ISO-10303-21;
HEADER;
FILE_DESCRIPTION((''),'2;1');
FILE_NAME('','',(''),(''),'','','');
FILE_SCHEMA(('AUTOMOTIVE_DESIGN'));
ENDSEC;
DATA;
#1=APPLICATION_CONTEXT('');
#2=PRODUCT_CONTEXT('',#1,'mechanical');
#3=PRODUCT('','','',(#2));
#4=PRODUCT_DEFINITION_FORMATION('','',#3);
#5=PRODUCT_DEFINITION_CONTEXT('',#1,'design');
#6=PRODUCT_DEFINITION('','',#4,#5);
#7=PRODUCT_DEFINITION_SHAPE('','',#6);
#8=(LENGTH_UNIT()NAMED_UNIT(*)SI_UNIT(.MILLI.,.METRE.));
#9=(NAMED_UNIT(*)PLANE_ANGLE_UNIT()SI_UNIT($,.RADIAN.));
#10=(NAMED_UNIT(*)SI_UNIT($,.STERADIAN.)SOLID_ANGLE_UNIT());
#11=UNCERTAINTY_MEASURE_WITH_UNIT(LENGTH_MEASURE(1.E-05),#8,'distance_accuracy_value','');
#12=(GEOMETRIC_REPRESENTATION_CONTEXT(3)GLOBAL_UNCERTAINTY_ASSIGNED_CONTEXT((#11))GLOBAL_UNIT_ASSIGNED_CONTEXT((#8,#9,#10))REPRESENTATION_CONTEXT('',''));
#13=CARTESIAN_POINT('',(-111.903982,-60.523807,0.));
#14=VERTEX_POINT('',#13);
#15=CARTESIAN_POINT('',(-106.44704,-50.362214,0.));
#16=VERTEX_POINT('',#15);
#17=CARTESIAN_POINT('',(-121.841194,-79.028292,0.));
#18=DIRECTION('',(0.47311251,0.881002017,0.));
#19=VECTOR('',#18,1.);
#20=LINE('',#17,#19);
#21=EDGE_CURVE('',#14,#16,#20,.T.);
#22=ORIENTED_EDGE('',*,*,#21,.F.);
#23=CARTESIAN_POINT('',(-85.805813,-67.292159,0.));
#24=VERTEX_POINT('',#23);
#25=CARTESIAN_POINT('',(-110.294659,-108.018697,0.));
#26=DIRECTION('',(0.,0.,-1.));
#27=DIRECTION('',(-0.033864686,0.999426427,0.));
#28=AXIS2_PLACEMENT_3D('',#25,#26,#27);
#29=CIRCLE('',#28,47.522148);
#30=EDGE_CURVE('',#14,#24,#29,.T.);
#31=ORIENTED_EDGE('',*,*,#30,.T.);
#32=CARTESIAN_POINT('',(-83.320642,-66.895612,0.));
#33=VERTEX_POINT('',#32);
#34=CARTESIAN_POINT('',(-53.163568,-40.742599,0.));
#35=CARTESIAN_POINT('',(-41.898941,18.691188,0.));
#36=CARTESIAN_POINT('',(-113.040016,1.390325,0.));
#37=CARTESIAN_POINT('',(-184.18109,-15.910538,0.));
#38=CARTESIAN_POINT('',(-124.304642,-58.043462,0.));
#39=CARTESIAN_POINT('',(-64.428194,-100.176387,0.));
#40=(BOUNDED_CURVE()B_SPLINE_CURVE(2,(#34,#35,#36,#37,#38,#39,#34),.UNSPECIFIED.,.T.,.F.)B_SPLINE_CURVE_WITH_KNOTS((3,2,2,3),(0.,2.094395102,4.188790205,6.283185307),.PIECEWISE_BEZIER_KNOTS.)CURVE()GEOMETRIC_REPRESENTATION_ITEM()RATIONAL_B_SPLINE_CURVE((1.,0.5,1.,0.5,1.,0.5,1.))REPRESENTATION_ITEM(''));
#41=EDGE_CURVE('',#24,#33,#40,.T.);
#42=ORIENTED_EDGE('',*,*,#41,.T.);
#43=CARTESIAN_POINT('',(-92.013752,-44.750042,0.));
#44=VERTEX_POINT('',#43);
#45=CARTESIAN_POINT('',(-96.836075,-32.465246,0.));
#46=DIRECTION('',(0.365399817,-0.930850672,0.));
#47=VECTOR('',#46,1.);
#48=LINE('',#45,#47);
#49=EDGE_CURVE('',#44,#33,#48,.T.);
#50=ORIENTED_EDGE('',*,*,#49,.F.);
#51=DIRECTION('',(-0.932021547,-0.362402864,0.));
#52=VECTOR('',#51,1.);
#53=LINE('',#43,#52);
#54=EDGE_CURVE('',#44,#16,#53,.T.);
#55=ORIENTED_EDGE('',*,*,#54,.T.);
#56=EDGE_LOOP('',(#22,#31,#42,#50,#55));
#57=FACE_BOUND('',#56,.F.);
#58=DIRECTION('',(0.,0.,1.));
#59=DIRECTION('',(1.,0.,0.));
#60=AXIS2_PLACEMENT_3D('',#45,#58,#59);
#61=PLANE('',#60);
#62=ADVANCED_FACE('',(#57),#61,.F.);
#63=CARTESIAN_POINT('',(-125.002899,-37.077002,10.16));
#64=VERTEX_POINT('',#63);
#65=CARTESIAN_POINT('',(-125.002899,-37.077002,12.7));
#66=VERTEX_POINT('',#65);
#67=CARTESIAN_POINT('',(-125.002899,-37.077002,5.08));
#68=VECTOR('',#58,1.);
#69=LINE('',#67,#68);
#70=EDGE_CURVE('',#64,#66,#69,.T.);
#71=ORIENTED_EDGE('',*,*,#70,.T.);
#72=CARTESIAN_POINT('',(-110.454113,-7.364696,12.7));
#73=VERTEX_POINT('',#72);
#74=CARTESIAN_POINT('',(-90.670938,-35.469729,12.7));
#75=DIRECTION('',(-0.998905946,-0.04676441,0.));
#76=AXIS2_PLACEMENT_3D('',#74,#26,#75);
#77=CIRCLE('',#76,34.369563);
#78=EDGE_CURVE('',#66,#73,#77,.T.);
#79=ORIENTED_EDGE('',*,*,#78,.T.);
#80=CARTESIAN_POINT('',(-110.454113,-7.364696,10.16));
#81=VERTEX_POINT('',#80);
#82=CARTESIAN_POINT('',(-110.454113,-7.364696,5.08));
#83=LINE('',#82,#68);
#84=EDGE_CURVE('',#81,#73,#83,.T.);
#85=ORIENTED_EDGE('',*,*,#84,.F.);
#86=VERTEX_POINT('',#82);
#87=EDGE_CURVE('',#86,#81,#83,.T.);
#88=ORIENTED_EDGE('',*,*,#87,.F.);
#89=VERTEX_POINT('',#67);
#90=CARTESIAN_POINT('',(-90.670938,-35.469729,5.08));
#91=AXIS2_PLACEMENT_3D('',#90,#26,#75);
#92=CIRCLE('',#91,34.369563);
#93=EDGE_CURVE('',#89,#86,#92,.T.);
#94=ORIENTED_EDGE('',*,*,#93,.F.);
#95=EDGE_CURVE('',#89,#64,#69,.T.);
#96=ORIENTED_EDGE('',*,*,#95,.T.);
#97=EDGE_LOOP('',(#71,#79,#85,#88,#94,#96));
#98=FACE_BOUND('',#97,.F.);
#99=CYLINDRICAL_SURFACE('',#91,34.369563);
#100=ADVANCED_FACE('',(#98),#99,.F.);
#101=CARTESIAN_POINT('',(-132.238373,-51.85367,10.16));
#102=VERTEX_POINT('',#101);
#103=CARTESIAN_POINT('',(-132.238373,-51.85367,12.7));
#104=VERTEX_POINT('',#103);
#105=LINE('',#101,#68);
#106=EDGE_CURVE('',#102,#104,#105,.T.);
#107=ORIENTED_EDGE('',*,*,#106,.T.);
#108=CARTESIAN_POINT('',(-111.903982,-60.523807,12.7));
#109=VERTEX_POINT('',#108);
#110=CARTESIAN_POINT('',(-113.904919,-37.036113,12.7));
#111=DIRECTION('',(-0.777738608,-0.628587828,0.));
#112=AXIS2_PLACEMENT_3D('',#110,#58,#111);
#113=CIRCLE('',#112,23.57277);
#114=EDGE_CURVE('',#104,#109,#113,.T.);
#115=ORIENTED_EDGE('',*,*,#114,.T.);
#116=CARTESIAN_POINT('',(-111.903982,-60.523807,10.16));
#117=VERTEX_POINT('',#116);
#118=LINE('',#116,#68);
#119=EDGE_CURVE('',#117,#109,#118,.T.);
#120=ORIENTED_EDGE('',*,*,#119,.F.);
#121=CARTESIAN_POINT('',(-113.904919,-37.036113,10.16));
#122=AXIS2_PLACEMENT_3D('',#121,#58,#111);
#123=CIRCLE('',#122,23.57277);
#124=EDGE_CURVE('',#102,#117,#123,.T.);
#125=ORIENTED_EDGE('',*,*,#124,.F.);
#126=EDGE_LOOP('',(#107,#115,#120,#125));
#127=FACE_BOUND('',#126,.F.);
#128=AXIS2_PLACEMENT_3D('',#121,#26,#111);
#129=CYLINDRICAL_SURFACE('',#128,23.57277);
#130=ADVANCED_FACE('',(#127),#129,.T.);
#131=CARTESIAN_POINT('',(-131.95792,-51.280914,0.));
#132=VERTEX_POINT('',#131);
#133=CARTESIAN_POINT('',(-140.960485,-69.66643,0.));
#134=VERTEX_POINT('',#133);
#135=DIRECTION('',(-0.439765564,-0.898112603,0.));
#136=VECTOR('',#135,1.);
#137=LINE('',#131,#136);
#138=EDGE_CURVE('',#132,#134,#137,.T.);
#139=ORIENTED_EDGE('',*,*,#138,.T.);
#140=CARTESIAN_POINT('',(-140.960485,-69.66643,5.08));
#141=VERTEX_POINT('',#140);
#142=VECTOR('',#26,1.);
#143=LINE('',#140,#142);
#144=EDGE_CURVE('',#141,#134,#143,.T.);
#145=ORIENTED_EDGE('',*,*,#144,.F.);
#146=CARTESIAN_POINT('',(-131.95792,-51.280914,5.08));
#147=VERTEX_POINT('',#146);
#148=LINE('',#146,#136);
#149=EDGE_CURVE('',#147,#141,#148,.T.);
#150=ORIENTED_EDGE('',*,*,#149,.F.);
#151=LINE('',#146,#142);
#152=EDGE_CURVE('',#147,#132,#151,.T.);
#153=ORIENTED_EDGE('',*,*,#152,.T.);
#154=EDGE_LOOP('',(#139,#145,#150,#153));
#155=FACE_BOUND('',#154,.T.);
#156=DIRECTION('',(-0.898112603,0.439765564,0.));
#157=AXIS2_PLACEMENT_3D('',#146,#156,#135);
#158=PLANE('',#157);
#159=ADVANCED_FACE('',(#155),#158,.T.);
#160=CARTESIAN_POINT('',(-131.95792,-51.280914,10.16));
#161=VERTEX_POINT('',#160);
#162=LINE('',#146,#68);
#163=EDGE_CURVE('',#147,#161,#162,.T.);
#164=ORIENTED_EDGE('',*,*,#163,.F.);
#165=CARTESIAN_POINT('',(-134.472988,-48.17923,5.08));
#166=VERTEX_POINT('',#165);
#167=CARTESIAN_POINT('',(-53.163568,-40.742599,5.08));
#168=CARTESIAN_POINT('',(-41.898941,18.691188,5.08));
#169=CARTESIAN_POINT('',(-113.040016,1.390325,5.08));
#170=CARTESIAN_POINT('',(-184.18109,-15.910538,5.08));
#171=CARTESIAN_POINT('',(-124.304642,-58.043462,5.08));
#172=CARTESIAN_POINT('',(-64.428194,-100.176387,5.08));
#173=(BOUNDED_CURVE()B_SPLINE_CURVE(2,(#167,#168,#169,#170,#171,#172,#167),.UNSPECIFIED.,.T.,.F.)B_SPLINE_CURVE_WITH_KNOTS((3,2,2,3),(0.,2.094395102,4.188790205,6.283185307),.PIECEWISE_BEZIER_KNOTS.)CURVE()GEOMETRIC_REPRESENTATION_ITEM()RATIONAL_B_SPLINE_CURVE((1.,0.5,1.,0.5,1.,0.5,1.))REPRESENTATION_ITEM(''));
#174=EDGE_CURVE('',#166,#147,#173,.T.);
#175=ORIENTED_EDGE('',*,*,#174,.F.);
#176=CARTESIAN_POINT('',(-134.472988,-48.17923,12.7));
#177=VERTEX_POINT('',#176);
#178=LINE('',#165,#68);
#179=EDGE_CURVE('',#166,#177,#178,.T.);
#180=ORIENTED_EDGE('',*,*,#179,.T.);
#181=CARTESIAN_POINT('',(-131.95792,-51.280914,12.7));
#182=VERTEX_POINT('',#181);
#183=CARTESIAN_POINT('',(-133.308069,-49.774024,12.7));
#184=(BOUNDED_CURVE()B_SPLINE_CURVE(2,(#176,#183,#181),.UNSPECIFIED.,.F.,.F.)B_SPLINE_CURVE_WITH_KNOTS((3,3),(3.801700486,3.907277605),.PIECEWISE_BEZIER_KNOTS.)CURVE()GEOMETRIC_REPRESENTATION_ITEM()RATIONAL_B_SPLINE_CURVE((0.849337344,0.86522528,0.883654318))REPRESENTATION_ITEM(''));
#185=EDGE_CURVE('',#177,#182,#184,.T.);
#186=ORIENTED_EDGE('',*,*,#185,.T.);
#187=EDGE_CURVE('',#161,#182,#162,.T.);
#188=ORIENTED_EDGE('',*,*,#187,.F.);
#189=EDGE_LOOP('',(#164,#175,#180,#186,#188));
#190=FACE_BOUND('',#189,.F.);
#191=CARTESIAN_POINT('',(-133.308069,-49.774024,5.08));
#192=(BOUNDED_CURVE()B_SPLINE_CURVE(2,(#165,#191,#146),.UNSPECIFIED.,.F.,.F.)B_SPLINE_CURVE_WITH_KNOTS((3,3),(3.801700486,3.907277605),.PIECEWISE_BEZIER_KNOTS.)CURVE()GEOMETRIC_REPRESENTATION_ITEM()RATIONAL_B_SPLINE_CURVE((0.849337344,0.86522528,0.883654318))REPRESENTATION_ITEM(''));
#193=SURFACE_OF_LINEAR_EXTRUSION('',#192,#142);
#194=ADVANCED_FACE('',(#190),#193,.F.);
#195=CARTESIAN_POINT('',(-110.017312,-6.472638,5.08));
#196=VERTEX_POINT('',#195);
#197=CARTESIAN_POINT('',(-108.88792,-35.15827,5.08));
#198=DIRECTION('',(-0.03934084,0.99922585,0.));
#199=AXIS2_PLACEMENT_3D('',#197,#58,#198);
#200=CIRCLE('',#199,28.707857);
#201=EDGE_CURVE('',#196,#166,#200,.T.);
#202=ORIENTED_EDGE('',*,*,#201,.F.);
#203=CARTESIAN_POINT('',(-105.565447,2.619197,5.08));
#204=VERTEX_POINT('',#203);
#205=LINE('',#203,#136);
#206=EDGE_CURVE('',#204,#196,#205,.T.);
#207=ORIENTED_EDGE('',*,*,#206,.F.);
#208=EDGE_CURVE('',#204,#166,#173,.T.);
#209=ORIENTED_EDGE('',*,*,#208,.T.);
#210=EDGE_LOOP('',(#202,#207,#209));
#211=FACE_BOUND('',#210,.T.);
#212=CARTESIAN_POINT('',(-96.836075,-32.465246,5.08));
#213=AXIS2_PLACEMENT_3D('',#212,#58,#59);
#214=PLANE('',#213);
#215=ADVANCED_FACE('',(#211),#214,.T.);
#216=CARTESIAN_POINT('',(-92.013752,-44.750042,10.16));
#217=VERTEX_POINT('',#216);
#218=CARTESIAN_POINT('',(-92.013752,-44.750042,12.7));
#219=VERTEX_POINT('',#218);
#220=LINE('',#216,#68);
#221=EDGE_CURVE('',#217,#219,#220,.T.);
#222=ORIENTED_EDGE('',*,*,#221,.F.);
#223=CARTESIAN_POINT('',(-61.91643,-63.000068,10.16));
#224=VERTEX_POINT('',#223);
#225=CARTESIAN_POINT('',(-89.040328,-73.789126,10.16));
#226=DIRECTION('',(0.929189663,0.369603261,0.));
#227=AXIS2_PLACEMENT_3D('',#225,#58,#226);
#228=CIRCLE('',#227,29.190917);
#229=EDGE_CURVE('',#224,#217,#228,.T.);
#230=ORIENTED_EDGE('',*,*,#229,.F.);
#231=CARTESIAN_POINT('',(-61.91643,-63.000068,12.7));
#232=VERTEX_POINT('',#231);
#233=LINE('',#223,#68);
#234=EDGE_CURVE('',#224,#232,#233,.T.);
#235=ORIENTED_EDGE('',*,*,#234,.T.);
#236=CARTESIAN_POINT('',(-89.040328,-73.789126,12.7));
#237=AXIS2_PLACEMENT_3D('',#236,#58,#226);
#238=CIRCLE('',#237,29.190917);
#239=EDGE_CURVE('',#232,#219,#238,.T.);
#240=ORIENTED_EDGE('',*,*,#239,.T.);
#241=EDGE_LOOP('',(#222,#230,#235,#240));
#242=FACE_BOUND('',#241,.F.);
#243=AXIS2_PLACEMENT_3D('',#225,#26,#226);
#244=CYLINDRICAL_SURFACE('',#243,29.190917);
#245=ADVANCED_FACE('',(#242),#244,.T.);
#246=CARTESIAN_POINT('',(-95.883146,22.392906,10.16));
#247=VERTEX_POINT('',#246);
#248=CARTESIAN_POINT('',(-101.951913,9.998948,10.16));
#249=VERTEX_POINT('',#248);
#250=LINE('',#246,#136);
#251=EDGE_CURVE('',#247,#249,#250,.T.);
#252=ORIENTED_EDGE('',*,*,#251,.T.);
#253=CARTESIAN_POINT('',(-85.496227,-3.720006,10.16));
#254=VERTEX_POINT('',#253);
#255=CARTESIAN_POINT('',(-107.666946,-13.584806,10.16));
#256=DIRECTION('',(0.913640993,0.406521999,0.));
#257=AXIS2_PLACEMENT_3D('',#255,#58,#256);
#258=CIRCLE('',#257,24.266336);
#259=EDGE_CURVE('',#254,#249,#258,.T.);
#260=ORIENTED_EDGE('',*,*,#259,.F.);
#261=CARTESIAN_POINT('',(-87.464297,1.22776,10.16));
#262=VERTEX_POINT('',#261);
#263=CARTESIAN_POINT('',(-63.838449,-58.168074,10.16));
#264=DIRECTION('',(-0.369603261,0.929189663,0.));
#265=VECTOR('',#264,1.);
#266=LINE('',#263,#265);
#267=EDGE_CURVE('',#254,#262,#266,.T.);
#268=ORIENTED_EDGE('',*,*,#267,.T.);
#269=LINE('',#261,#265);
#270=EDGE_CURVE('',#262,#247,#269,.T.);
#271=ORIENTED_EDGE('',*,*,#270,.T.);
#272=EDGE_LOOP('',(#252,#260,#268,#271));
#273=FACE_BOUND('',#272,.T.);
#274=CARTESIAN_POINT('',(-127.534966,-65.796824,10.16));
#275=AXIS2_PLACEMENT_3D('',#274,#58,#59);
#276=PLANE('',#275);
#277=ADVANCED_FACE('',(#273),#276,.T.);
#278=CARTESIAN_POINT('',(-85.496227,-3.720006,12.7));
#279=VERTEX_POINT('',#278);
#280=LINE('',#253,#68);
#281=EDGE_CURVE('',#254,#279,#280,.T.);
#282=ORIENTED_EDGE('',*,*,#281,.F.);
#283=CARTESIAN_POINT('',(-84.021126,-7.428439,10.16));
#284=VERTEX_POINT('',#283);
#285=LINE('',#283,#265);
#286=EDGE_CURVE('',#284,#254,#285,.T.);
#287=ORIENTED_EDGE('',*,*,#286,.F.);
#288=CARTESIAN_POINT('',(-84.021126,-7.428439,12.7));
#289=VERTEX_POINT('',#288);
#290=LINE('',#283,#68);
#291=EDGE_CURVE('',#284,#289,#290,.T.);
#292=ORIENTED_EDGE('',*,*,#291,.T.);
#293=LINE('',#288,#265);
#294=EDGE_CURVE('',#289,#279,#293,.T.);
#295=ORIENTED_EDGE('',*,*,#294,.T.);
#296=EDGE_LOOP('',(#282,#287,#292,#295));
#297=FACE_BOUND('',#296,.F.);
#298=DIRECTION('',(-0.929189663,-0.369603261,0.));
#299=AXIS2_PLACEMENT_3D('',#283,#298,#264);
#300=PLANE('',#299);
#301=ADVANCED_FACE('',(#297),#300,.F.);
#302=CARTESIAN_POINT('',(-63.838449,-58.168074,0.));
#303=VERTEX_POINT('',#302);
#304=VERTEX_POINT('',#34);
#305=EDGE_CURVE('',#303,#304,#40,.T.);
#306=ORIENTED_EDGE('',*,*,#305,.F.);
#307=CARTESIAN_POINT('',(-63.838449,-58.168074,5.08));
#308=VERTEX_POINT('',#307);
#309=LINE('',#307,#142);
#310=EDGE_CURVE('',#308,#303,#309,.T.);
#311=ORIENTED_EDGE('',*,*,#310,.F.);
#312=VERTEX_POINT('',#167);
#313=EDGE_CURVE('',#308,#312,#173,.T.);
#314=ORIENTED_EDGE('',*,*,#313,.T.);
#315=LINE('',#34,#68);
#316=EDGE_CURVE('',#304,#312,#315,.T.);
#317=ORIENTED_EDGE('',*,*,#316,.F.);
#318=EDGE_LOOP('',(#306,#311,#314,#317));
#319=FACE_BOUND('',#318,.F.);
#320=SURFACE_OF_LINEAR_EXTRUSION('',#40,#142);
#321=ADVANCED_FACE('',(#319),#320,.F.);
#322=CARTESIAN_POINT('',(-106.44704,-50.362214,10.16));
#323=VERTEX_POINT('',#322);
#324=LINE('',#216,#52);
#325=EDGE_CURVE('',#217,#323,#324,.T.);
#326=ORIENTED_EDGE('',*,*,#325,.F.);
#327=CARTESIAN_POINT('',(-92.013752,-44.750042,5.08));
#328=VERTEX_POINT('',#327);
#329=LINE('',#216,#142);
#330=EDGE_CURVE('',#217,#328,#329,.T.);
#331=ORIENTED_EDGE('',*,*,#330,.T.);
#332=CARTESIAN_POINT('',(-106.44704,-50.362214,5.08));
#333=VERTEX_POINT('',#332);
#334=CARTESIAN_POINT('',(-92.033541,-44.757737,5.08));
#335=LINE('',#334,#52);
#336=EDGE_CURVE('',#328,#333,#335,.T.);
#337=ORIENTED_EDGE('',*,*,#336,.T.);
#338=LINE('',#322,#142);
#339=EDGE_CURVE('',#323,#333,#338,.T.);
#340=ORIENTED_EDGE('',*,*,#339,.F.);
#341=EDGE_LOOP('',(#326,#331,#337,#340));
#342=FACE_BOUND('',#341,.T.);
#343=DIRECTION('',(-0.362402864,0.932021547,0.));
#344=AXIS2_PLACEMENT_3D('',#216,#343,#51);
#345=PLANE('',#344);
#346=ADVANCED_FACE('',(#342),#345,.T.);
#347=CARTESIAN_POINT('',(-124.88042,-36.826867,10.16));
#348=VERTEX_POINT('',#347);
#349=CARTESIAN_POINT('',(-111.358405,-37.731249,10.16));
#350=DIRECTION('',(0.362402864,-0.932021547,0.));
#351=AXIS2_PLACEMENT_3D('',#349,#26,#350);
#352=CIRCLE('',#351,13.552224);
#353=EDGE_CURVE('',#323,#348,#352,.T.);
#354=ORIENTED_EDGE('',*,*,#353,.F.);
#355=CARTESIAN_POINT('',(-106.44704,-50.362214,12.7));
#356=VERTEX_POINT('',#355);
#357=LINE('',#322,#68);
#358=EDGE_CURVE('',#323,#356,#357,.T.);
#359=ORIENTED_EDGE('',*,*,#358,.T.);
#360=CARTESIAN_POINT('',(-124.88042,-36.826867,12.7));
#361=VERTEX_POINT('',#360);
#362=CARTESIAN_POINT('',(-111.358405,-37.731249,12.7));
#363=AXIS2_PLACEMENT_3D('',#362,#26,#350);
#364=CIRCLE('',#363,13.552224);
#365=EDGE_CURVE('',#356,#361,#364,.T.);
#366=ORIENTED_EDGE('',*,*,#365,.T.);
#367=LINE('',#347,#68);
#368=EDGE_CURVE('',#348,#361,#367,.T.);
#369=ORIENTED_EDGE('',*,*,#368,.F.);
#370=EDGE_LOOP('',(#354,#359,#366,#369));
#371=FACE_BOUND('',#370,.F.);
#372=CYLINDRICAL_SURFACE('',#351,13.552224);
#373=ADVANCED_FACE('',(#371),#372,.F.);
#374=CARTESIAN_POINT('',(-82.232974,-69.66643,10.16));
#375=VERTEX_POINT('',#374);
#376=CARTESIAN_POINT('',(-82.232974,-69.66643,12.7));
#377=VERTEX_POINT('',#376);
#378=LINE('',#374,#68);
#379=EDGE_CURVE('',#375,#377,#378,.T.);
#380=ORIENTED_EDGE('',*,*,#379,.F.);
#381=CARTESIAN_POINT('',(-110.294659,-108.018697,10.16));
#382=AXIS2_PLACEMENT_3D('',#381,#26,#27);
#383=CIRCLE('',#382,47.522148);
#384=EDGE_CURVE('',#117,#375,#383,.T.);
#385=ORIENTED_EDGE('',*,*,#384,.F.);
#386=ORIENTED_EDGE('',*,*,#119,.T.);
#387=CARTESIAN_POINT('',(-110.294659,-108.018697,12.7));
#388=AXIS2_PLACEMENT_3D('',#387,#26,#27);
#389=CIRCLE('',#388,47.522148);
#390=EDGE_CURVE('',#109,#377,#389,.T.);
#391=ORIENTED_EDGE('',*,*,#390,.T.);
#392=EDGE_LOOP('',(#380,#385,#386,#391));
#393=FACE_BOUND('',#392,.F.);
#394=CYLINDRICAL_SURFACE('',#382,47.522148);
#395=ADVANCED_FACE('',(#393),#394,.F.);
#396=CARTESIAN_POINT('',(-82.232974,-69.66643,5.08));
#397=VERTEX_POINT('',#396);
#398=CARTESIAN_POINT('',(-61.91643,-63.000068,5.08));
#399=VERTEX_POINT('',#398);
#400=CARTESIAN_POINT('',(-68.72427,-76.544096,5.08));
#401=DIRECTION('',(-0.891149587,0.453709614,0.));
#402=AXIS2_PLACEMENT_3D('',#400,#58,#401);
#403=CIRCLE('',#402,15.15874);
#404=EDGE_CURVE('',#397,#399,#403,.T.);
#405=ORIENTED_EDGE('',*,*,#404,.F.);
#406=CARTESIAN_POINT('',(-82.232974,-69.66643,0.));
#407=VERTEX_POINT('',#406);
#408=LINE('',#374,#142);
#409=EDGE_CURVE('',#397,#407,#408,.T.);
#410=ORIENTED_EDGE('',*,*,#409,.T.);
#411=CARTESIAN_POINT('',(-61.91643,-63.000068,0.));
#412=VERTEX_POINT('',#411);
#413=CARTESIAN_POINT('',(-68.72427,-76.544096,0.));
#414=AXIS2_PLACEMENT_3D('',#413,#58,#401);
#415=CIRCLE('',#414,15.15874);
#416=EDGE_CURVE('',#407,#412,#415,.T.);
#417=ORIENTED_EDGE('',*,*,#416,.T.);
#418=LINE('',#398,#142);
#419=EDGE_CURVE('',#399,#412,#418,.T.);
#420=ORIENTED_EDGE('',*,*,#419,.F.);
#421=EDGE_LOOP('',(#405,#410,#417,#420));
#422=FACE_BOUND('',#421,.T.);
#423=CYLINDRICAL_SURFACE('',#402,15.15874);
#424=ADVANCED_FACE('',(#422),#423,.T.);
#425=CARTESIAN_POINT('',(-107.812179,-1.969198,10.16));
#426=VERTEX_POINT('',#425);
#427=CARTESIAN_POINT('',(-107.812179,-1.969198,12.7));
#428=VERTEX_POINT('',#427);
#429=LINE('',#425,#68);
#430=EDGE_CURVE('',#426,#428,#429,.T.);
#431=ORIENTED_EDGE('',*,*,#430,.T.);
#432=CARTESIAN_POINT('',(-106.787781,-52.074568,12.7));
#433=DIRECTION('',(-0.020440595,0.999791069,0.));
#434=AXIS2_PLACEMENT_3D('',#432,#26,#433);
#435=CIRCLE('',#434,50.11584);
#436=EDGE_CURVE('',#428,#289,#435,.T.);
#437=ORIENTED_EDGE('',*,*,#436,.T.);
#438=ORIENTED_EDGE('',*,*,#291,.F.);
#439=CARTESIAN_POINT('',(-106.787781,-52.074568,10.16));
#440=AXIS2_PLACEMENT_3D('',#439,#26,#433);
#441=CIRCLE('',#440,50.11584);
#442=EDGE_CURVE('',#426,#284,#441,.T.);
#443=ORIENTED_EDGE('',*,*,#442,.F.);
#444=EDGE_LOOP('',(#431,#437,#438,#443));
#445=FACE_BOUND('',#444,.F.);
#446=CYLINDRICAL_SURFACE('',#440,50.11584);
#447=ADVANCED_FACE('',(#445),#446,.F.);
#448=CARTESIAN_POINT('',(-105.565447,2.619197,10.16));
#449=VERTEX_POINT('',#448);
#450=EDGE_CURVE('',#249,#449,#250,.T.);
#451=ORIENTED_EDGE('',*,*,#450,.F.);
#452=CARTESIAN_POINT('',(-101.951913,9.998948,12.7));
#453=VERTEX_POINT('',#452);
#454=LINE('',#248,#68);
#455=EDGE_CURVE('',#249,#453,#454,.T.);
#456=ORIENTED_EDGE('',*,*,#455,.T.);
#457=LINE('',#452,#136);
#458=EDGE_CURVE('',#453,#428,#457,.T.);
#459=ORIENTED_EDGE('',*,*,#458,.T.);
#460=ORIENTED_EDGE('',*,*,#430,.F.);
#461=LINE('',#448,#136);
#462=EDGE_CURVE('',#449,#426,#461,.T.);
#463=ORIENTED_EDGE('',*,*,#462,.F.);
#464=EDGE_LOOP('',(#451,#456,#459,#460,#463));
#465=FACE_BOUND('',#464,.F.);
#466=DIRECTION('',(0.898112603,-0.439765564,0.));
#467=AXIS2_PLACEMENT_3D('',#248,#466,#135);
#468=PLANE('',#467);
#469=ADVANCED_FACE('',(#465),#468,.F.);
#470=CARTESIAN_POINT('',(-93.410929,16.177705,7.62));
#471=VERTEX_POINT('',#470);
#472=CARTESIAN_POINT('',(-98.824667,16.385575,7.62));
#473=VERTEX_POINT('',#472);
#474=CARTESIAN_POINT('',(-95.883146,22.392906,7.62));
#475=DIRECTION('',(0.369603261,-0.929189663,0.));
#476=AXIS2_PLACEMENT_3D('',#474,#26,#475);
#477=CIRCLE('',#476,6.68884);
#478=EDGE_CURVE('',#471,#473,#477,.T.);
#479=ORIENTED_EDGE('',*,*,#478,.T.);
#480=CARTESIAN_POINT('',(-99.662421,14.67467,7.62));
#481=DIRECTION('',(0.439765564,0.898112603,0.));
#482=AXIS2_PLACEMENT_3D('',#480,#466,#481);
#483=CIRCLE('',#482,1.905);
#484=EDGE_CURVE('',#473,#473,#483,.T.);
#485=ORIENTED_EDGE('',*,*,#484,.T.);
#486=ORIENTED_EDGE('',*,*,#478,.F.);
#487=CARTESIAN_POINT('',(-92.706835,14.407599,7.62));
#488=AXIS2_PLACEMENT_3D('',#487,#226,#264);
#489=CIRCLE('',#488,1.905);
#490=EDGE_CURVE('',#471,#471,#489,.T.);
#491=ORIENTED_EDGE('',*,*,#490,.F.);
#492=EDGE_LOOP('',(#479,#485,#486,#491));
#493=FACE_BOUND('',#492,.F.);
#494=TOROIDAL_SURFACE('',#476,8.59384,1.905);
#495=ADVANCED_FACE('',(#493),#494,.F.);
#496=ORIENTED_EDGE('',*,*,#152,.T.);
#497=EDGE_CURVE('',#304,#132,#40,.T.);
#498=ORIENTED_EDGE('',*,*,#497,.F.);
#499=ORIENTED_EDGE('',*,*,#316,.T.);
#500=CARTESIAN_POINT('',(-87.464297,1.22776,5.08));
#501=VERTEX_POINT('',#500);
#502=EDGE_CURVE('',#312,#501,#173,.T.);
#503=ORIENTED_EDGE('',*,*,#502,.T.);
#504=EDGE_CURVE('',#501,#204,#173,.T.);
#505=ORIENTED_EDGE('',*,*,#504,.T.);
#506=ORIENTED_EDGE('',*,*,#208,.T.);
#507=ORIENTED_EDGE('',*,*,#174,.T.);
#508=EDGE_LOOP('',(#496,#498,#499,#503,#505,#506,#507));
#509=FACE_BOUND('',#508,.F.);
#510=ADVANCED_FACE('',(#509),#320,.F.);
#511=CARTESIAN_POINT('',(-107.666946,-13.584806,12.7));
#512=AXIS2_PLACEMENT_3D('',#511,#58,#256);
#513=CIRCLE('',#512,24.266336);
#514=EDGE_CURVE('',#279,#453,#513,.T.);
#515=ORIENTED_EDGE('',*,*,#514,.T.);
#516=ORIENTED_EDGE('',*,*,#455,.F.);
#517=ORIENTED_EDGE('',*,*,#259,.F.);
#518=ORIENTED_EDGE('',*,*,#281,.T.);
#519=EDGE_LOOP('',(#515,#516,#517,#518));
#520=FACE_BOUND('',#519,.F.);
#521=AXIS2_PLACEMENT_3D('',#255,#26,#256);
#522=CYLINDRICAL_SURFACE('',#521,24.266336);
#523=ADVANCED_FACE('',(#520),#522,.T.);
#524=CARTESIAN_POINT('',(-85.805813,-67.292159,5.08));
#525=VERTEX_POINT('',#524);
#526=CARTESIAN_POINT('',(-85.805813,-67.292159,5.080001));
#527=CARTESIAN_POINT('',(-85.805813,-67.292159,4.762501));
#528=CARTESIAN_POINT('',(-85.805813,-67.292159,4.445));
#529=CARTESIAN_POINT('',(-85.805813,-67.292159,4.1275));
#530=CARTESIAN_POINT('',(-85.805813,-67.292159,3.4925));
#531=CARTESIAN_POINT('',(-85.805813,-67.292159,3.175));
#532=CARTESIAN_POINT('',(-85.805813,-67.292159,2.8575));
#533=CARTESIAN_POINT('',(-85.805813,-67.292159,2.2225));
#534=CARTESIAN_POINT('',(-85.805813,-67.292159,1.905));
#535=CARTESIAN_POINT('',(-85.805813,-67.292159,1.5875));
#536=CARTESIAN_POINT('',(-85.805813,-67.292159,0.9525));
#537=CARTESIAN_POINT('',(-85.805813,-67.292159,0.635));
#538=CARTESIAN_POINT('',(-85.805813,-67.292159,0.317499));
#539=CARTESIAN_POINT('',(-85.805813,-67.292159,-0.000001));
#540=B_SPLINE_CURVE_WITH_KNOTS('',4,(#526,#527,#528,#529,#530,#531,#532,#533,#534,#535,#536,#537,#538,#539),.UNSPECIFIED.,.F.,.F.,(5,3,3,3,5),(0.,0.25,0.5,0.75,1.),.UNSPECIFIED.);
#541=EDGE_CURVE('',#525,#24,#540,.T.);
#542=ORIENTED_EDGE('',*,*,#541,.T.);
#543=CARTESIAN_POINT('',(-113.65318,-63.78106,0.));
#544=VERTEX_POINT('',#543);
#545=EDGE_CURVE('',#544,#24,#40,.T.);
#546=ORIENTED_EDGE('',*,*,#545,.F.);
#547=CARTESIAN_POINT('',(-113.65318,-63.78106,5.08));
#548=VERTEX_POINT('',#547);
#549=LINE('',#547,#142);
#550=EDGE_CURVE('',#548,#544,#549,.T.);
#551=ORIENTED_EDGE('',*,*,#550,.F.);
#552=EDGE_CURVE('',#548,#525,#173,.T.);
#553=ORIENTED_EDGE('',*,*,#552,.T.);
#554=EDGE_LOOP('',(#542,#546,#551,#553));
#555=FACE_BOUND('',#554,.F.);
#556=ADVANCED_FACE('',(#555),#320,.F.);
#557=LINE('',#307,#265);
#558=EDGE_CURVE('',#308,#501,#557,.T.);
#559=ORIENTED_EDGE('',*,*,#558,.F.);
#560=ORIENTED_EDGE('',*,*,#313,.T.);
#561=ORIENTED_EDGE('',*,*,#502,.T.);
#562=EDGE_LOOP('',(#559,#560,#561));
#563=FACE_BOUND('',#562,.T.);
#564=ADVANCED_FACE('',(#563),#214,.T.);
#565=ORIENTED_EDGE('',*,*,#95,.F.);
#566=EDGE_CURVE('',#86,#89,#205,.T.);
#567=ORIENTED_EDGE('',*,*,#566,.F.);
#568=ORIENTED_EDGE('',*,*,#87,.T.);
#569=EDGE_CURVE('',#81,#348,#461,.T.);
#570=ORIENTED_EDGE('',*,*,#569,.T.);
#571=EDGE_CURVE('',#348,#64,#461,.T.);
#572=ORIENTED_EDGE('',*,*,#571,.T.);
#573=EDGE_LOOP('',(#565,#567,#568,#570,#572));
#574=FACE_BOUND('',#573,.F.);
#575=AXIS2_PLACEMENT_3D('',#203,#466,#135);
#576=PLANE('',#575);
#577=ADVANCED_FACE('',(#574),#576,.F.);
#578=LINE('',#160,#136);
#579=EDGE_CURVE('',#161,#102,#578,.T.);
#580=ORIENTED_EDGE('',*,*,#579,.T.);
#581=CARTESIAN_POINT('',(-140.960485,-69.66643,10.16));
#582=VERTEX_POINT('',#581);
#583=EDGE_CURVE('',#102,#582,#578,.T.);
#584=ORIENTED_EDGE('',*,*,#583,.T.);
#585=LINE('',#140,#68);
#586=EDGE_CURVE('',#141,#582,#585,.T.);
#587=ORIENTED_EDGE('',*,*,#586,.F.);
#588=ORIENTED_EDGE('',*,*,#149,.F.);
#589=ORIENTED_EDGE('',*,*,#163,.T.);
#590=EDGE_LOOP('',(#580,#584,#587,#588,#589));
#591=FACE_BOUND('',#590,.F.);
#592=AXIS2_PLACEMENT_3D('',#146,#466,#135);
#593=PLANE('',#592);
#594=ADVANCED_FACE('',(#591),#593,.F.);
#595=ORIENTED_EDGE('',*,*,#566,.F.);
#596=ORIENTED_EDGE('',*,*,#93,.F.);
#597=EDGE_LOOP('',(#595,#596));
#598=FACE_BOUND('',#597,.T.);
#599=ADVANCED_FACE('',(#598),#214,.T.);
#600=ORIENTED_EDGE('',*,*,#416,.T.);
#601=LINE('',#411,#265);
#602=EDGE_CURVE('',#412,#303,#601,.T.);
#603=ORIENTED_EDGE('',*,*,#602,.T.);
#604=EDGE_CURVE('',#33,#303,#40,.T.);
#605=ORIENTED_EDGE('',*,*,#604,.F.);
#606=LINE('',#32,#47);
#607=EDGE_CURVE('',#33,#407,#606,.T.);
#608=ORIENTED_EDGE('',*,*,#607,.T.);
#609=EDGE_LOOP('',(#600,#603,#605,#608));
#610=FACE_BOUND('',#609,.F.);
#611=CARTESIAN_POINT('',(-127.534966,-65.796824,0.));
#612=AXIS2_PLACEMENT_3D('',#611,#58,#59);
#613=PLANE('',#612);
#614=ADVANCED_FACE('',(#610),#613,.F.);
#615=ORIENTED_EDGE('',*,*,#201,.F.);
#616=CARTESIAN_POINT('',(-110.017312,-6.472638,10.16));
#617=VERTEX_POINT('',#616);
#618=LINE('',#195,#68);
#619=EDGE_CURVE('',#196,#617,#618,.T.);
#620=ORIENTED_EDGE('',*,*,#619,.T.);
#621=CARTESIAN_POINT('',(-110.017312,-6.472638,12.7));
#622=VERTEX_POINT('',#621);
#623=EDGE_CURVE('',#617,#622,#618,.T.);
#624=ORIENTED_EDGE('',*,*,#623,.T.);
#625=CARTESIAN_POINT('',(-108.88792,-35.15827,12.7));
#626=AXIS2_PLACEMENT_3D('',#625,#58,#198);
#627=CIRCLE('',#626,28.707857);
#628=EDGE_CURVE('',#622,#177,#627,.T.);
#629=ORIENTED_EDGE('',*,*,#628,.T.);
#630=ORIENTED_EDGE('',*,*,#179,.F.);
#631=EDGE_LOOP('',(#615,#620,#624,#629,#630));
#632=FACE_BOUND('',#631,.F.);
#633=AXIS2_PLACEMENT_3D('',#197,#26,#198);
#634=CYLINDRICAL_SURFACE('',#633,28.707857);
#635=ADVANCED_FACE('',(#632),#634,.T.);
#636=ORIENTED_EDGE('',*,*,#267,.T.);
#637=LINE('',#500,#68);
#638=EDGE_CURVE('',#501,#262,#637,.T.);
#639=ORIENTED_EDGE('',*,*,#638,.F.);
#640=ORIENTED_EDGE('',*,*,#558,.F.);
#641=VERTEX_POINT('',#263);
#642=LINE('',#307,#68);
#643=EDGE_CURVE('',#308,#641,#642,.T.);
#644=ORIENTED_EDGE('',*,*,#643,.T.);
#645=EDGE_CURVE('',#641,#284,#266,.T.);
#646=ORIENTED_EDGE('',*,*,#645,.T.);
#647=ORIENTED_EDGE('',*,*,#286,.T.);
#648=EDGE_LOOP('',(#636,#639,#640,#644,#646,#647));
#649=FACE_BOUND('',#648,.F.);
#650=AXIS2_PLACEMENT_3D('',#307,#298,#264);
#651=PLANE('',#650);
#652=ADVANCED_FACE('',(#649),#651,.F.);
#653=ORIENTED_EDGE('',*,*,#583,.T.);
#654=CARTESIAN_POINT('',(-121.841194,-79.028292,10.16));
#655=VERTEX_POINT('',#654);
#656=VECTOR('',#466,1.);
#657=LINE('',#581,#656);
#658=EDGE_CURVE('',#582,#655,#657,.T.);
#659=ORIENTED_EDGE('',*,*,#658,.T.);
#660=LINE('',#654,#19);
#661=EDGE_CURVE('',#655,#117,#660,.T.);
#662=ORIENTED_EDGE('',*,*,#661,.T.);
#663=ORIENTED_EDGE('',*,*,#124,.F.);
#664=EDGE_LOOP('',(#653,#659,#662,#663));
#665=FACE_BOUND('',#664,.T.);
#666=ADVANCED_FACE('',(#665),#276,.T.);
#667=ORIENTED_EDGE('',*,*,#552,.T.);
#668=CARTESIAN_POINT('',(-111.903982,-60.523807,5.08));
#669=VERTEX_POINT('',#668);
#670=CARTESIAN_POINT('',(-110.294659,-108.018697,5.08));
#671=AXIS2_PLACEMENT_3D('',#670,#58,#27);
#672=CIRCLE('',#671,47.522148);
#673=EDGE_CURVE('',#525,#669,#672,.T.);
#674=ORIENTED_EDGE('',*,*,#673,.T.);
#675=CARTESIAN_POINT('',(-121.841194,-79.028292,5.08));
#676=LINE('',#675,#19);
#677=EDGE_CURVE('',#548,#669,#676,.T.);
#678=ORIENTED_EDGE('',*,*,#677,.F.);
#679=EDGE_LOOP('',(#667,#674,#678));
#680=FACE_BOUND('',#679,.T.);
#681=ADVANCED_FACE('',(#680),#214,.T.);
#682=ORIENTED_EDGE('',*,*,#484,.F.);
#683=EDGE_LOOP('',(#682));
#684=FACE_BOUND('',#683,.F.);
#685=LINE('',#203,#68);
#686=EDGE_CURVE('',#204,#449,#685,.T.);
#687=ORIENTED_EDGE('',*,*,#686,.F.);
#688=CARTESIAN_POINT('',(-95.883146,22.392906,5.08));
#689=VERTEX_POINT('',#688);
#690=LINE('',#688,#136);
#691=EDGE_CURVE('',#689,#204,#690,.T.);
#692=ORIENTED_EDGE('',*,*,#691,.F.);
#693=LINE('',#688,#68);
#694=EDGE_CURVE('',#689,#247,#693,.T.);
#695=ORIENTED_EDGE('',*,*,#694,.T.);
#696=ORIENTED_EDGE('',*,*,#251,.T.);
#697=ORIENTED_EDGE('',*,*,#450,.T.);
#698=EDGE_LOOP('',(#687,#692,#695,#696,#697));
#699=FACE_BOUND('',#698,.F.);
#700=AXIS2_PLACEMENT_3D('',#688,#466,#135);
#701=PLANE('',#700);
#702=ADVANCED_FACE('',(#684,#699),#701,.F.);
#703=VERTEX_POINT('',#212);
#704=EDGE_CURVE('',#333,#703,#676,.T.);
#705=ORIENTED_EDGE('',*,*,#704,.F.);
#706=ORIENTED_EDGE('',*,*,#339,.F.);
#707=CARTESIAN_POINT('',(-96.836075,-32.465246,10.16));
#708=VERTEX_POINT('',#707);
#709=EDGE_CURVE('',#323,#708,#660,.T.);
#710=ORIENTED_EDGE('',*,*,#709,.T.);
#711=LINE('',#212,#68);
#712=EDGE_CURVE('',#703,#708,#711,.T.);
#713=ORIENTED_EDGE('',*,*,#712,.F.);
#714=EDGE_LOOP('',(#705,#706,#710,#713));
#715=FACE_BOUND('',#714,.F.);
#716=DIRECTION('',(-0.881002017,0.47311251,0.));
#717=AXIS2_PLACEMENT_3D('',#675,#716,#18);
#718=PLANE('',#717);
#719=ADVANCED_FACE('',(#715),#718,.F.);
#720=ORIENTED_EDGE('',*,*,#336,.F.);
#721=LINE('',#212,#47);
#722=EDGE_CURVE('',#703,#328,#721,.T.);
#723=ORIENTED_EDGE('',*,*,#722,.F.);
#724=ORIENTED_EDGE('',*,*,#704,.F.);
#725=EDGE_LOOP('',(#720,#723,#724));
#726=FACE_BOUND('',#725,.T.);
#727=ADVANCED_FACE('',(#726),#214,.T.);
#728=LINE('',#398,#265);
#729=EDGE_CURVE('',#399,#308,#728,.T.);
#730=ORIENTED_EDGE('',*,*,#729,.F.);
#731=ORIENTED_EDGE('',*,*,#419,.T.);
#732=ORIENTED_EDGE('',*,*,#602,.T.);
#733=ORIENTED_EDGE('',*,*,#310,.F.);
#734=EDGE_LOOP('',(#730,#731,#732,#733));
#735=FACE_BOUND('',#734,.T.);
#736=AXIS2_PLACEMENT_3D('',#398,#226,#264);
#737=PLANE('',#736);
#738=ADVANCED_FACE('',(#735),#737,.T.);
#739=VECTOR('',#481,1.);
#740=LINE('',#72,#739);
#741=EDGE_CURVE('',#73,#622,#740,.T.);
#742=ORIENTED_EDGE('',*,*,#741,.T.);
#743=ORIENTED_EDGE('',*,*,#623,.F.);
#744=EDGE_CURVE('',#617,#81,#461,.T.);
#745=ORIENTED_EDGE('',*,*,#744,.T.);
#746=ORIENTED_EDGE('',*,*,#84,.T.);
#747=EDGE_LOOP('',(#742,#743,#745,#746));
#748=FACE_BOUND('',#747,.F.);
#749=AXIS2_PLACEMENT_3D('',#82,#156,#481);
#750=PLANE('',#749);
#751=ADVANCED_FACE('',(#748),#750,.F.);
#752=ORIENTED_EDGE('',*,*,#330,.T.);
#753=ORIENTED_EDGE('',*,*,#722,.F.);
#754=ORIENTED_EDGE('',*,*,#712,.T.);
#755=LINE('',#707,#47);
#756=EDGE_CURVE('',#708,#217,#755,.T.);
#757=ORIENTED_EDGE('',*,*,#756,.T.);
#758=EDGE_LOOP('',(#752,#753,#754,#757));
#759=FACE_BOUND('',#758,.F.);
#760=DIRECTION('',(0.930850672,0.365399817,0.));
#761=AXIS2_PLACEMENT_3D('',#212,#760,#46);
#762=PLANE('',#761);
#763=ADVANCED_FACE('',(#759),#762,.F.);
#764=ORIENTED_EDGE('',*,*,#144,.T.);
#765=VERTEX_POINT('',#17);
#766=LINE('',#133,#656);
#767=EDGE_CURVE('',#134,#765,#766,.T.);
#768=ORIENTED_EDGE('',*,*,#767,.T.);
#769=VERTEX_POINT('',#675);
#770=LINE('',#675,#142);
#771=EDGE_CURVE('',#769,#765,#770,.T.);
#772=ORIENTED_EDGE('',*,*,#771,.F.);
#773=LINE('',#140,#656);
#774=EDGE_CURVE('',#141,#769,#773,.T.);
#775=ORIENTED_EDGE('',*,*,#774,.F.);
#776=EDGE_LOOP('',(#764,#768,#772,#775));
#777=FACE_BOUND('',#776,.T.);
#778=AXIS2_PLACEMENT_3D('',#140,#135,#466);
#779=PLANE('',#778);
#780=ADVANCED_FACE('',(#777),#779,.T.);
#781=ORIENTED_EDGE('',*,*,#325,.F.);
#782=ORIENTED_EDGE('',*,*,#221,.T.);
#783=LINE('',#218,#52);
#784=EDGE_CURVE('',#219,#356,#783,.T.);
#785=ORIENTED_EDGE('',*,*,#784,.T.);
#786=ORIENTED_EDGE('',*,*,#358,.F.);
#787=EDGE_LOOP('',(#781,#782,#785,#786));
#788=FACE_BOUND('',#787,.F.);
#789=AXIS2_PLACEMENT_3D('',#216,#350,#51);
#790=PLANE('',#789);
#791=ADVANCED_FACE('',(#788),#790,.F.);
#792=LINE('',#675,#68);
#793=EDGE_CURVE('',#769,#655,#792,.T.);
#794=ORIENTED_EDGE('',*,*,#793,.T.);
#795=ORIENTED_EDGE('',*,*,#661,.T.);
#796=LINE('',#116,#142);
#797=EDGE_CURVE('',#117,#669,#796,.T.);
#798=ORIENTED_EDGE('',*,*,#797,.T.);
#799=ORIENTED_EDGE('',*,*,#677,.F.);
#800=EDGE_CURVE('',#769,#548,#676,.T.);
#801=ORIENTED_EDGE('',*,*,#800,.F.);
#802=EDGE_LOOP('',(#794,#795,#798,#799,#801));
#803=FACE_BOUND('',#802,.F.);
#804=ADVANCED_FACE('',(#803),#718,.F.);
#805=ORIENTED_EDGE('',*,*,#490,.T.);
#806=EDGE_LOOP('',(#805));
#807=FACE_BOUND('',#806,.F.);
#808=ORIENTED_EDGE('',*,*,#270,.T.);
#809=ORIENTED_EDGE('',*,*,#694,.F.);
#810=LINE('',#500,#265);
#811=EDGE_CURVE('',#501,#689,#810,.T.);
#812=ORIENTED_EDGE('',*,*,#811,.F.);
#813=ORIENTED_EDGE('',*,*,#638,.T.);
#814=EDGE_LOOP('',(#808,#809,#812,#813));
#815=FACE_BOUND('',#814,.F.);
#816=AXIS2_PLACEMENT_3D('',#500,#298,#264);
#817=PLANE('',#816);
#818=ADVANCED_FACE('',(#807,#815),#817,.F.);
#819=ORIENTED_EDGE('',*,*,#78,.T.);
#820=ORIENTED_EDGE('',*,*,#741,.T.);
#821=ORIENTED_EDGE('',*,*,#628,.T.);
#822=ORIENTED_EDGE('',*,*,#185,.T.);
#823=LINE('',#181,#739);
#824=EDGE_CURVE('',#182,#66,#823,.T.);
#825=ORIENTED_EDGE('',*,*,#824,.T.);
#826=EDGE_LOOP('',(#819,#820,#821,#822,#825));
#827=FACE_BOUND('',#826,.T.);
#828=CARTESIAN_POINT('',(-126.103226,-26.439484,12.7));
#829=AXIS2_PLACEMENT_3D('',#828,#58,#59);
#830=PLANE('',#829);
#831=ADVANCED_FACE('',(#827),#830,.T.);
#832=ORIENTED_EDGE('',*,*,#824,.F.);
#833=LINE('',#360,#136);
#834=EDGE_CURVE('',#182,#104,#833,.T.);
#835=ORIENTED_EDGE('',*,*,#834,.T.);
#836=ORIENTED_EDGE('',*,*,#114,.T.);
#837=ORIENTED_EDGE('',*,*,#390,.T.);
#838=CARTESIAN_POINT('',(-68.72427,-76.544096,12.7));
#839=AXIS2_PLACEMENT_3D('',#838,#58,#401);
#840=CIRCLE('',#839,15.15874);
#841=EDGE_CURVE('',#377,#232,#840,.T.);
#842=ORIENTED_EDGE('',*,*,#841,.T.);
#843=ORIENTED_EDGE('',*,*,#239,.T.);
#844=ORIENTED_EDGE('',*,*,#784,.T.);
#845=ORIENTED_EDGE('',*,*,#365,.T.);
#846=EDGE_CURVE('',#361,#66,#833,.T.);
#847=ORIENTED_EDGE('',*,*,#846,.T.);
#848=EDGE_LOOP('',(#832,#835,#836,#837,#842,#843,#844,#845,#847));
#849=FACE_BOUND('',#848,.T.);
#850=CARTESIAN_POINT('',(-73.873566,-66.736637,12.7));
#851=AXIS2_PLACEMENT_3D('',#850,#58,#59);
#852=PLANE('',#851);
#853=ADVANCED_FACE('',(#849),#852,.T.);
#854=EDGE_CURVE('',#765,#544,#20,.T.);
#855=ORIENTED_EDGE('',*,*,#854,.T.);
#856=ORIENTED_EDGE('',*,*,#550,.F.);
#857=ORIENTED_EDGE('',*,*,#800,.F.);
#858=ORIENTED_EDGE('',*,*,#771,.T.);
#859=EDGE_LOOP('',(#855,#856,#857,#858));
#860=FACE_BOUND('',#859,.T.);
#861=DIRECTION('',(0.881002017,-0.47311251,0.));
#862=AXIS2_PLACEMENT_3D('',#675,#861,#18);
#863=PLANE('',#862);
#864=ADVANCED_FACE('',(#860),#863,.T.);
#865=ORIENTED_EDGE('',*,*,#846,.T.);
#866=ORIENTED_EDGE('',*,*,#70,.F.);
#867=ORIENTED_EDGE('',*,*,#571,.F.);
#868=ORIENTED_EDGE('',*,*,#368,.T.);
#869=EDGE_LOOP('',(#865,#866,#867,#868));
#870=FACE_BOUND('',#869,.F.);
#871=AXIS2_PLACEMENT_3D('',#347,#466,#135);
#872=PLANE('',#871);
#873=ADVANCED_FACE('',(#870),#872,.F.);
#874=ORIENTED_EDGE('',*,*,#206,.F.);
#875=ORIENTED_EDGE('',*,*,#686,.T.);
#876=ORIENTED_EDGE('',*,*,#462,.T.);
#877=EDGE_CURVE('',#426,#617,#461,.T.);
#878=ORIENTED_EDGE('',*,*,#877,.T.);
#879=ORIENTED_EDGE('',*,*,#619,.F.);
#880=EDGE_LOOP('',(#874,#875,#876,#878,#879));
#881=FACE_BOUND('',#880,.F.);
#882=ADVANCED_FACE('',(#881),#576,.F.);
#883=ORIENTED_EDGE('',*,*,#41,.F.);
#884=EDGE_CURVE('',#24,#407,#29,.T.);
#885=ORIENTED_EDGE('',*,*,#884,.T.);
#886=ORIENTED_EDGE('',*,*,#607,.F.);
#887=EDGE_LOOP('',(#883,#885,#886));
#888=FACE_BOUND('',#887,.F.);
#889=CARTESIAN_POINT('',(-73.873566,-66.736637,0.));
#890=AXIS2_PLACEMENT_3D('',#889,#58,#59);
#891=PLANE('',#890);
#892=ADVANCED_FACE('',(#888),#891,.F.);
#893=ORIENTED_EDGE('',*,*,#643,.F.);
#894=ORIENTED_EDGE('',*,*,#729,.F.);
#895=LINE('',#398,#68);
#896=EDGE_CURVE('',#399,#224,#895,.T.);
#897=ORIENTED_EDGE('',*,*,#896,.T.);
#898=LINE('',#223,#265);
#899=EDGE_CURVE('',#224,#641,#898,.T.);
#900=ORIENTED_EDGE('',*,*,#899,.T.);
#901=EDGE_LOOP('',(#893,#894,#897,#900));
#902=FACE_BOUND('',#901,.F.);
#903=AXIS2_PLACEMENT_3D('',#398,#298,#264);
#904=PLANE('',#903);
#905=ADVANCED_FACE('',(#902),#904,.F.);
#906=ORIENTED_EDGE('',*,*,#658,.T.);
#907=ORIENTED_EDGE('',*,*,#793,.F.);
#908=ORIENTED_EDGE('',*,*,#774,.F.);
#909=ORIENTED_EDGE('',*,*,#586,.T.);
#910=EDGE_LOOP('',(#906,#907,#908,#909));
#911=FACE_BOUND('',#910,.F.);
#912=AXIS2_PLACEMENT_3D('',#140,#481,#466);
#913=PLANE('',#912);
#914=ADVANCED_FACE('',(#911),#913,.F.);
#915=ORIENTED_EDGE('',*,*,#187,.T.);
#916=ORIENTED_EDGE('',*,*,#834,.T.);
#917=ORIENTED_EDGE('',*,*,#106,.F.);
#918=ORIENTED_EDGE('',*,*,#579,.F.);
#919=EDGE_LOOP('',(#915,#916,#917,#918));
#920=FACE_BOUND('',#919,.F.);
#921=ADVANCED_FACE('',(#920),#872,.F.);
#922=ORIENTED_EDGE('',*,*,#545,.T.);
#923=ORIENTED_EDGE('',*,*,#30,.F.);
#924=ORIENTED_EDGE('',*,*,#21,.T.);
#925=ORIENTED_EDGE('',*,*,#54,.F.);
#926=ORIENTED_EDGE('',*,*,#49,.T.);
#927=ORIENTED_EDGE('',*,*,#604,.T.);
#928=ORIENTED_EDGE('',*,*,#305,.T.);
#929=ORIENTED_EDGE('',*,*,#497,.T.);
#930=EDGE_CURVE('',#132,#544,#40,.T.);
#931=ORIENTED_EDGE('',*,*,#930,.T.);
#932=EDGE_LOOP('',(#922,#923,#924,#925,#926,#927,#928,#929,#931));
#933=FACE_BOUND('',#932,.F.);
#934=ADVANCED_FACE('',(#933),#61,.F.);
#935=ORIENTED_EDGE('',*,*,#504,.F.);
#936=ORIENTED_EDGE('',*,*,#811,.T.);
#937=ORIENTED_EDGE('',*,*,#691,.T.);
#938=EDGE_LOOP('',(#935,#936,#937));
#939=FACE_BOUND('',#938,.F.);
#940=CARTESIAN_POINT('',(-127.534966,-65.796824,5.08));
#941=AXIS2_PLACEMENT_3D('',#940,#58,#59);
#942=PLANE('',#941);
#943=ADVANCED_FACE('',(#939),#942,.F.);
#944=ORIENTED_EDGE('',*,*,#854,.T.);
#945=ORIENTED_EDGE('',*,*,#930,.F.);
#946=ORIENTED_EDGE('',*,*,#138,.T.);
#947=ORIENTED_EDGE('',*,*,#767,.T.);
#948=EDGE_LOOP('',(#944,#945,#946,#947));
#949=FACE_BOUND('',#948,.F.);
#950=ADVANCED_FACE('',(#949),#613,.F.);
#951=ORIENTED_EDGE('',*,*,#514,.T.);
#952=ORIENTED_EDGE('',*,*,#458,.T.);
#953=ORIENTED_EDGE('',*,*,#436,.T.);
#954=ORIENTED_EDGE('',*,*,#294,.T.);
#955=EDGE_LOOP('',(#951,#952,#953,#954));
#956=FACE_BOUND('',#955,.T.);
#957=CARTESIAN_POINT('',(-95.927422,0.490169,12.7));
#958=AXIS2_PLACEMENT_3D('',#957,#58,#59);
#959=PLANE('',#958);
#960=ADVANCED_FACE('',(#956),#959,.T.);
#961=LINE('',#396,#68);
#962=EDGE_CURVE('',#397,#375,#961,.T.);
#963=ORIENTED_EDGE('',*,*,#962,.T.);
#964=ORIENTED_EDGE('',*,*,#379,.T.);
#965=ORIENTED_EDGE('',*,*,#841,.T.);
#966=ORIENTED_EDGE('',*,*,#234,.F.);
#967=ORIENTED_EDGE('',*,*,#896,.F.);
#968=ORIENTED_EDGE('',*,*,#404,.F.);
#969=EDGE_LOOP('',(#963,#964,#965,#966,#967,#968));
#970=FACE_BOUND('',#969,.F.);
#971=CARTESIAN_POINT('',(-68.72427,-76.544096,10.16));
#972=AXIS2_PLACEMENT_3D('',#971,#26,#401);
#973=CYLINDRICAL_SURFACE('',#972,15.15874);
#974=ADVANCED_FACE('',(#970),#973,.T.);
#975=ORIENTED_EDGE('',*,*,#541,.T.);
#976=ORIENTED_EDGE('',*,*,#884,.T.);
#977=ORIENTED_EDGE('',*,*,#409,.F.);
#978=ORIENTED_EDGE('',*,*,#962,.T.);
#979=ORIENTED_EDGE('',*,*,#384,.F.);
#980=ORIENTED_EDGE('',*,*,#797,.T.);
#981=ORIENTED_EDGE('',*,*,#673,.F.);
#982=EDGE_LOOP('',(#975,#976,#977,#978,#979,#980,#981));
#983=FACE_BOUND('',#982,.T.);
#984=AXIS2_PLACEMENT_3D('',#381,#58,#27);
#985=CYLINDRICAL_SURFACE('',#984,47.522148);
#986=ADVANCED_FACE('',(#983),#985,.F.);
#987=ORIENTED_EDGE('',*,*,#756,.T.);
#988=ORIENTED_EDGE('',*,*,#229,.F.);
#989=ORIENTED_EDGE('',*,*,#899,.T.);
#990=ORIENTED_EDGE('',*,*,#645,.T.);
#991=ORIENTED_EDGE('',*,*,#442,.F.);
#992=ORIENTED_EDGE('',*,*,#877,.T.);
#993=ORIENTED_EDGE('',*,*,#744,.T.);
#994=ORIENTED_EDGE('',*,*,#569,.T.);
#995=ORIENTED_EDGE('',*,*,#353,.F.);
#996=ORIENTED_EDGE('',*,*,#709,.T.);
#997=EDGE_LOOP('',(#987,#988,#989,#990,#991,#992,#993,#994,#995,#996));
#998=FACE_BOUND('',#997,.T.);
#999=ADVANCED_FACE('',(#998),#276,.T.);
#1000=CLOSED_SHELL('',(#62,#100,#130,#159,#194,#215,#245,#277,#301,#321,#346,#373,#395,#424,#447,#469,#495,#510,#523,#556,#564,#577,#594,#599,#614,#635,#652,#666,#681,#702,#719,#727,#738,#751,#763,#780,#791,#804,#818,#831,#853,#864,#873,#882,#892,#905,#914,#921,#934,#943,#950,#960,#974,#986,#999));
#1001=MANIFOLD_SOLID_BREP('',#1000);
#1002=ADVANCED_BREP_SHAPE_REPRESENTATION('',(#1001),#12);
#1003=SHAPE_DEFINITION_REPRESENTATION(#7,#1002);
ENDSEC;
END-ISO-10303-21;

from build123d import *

# Parameters (mm, degrees)
F1_DEPTH  = 5.08
F3_DEPTH  = 5.08
F5_DEPTH  = 2.54
F7_DEPTH  = 10.16
F8_DEPTH  = 5.08
F9_DEPTH  = 5.08
F11_DEPTH = 7.62
F12_DEPTH = 2.54
F13_R     = 1.905


with BuildPart() as f1:
    # F0 (on Top) → F1 (new body)
    with BuildSketch(Plane.XY):
        with BuildLine():
            add(Edge.make_bspline(
                [(-53.1635676672, -40.7425994368), (-41.8989411061, 18.6911877843), (-113.0400156659, 1.3903249669), (-184.1810902258, -15.9105378505), (-124.304642227, -58.0434622542), (-64.4281942283, -100.1763866579), (-53.1635676672, -40.7425994368)],
                knots=[0, 0, 0, 2.0943951024, 2.0943951024, 4.1887902048, 4.1887902048, 6.2831853072, 6.2831853072, 6.2831853072], degree=2, weights=[1, 0.5, 1, 0.5, 1, 0.5, 1]))
        make_face()
    extrude(amount=F1_DEPTH)

    # F2 (on face) → F3 (join)
    with BuildSketch(Plane.XY.offset(5.08)):
        with BuildLine():
            Line((-131.9579197109, -51.2809136758), (-140.9604847431, -69.6664303541))
            Line((-140.9604847431, -69.6664303541), (-121.8411935672, -79.0282919321))
            Line((-121.8411935672, -79.0282919321), (-113.6531802251, -63.7810597846))
            add(Edge.make_bspline(
                [(-131.9579197109, -51.2809136758), (-128.6186368439, -55.0078578531), (-124.304642227, -58.0434622542), (-119.420845427, -61.4800161624), (-113.6531802251, -63.7810597846)],
                knots=[3.9072776048, 3.9072776048, 3.9072776048, 4.1887902048, 4.1887902048, 4.50468154, 4.50468154, 4.50468154], degree=2, weights=[0.8836543185, 0.9327938173, 1, 0.9245864988, 0.8719217822]))
        make_face()
        with BuildLine():
            Line((-105.5654466698, 2.6191971859), (-131.9579197109, -51.2809136758))
            add(Edge.make_bspline(
                [(-131.9579197109, -51.2809136758), (-128.6186368439, -55.0078578531), (-124.304642227, -58.0434622542), (-119.420845427, -61.4800161624), (-113.6531802251, -63.7810597846)],
                knots=[3.9072776048, 3.9072776048, 3.9072776048, 4.1887902048, 4.1887902048, 4.50468154, 4.50468154, 4.50468154], degree=2, weights=[0.8836543185, 0.9327938173, 1, 0.9245864988, 0.8719217822]))
            Line((-113.6531802251, -63.7810597846), (-96.8360751867, -32.4652455747))
            Line((-96.8360751867, -32.4652455747), (-83.3206423237, -66.8956124574))
            add(Edge.make_bspline(
                [(-83.3206423237, -66.8956124574), (-71.8467350955, -64.7720622624), (-63.8384492188, -58.1680738766)],
                knots=[5.1773121683, 5.1773121683, 5.1773121683, 5.6685915269, 5.6685915269, 5.6685915269], degree=2, weights=[0.7507848699, 0.7442133059, 0.7926641772]))
            Line((-63.8384492188, -58.1680738766), (-87.4642972057, 1.227759617))
            add(Edge.make_bspline(
                [(-87.4642972057, 1.227759617), (-96.5007837018, 3.4317958299), (-105.5654466698, 2.6191971859)],
                knots=[1.4695457005, 1.4695457005, 1.4695457005, 1.8905356916, 1.8905356916, 1.8905356916], degree=2, weights=[0.7906652984, 0.8311998282, 0.9121385395]))
        make_face()
        with BuildLine():
            add(Edge.make_bspline(
                [(-83.3206423237, -66.8956124574), (-71.8467350955, -64.7720622624), (-63.8384492188, -58.1680738766)],
                knots=[5.1773121683, 5.1773121683, 5.1773121683, 5.6685915269, 5.6685915269, 5.6685915269], degree=2, weights=[0.7507848699, 0.7442133059, 0.7926641772]))
            Line((-83.3206423237, -66.8956124574), (-82.2329744697, -69.6664303541))
            ThreePointArc((-82.2329744697, -69.6664303541), (-63.9982257769, -90.9472868448), (-61.9164295495, -63.0000680685))
            Line((-61.9164295495, -63.0000680685), (-63.8384492188, -58.1680738766))
        make_face()
        with BuildLine():
            Line((-95.8831459284, 22.3929062486), (-105.5654466698, 2.6191971859))
            add(Edge.make_bspline(
                [(-87.4642972057, 1.227759617), (-96.5007837018, 3.4317958299), (-105.5654466698, 2.6191971859)],
                knots=[1.4695457005, 1.4695457005, 1.4695457005, 1.8905356916, 1.8905356916, 1.8905356916], degree=2, weights=[0.7906652984, 0.8311998282, 0.9121385395]))
            Line((-87.4642972057, 1.227759617), (-95.8831459284, 22.3929062486))
        make_face()
    extrude(amount=F3_DEPTH)

    # F4 (on face) → F5 (join)
    with BuildSketch(Plane.XY.offset(10.16)):
        with BuildLine():
            ThreePointArc((-82.2329744697, -69.6664303541), (-63.9982257769, -90.9472868448), (-61.9164295495, -63.0000680685))
            ThreePointArc((-61.9164295495, -63.0000680685), (-73.905031166, -48.8285086128), (-92.013752266, -44.7500424488))
            Line((-92.013752266, -44.7500424488), (-82.2329744697, -69.6664303541))
        make_face()
        with BuildLine():
            Line((-82.2329744697, -69.6664303541), (-92.013752266, -44.7500424488))
            Line((-92.013752266, -44.7500424488), (-106.4470403828, -50.3622141534))
            Line((-106.4470403828, -50.3622141534), (-111.9039820196, -60.5238067737))
            ThreePointArc((-111.9039820196, -60.5238067737), (-96.3007764713, -62.6036581083), (-82.2329744697, -69.6664303541))
        make_face()
        with BuildLine():
            Line((-111.9039820196, -60.5238067737), (-106.4470403828, -50.3622141534))
            ThreePointArc((-106.4470403828, -50.3622141534), (-119.3794542725, -48.6548728117), (-124.8804196152, -36.8268669033))
            Line((-124.8804196152, -36.8268669033), (-132.2383726809, -51.8536696336))
            ThreePointArc((-132.2383726809, -51.8536696336), (-123.1504906465, -58.7200912674), (-111.9039820196, -60.5238067737))
        make_face()
    extrude(amount=F5_DEPTH)

    # F7 (add): a face of the model
    f7_faces = [f1.faces().sort_by_distance(p)[0] for p in [
        (-96.5809599227, -56.2228804189, 10.16),
    ]]
    extrude(f7_faces, amount=F7_DEPTH)

    # F8 (add): a face of the model
    f8_faces = [f1.faces().sort_by_distance(p)[0] for p in [
        (-127.5392459391, -66.1235419856, 5.08),
    ]]
    extrude(f8_faces, amount=F8_DEPTH)

    # F9 (add): a face of the model
    f9_faces = [f1.faces().sort_by_distance(p)[0] for p in [
        (-68.6388215129, -76.4740185579, 5.08),
    ]]
    extrude(f9_faces, amount=F9_DEPTH)

    # F6 (on face) → F11 (join)
    with BuildSketch(Plane.XY.offset(5.08)):
        with BuildLine():
            Line((-110.4541125519, -7.3646960477), (-110.0173115332, -6.472637797))
            ThreePointArc((-110.0173115332, -6.472637797), (-133.6523206327, -20.6370610227), (-134.4729876641, -48.1792295299))
            add(Edge.make_bspline(
                [(-134.4729876641, -48.1792295299), (-133.3080685152, -49.7740244947), (-131.9579197109, -51.2809136758)],
                knots=[3.801700486, 3.801700486, 3.801700486, 3.9072776048, 3.9072776048, 3.9072776048], degree=2, weights=[0.8493373441, 0.8652252795, 0.8836543185]))
            Line((-131.9579197109, -51.2809136758), (-125.0028994796, -37.0770017905))
            ThreePointArc((-125.0028994796, -37.0770017905), (-121.5386762873, -20.355178987), (-110.4541125519, -7.3646960477))
        make_face()
    extrude(amount=F11_DEPTH)

    # F10 (on face) → F12 (join)
    with BuildSketch(Plane.XY.offset(10.16)):
        with BuildLine():
            ThreePointArc((-107.8121787601, -1.9691984736), (-95.5792010439, -3.2282254929), (-84.0211259134, -7.428438835))
            Line((-84.0211259134, -7.428438835), (-85.4962270154, -3.7200064649))
            ThreePointArc((-85.4962270154, -3.7200064649), (-92.128084348, 5.0538321922), (-101.9519128194, 9.9989480276))
            Line((-101.9519128194, 9.9989480276), (-107.8121787601, -1.9691984736))
        make_face()
    extrude(amount=F12_DEPTH)

    # F13 (on face) → F14 (revolve, cut)
    with BuildSketch(Plane(origin=(-75.09444818, -29.8702773075, 0), x_dir=(-0.3696032606, 0.9291896629, 0), z_dir=(0.9291896629, 0.3696032606, 0))):
        with Locations((47.6521402597, 7.62)):
            Circle(F13_R)
    revolve(axis=Axis((-95.8831459284, 22.3929062486, 7.62), (0, 0, -1)), mode=Mode.SUBTRACT)


solid = f1.part
